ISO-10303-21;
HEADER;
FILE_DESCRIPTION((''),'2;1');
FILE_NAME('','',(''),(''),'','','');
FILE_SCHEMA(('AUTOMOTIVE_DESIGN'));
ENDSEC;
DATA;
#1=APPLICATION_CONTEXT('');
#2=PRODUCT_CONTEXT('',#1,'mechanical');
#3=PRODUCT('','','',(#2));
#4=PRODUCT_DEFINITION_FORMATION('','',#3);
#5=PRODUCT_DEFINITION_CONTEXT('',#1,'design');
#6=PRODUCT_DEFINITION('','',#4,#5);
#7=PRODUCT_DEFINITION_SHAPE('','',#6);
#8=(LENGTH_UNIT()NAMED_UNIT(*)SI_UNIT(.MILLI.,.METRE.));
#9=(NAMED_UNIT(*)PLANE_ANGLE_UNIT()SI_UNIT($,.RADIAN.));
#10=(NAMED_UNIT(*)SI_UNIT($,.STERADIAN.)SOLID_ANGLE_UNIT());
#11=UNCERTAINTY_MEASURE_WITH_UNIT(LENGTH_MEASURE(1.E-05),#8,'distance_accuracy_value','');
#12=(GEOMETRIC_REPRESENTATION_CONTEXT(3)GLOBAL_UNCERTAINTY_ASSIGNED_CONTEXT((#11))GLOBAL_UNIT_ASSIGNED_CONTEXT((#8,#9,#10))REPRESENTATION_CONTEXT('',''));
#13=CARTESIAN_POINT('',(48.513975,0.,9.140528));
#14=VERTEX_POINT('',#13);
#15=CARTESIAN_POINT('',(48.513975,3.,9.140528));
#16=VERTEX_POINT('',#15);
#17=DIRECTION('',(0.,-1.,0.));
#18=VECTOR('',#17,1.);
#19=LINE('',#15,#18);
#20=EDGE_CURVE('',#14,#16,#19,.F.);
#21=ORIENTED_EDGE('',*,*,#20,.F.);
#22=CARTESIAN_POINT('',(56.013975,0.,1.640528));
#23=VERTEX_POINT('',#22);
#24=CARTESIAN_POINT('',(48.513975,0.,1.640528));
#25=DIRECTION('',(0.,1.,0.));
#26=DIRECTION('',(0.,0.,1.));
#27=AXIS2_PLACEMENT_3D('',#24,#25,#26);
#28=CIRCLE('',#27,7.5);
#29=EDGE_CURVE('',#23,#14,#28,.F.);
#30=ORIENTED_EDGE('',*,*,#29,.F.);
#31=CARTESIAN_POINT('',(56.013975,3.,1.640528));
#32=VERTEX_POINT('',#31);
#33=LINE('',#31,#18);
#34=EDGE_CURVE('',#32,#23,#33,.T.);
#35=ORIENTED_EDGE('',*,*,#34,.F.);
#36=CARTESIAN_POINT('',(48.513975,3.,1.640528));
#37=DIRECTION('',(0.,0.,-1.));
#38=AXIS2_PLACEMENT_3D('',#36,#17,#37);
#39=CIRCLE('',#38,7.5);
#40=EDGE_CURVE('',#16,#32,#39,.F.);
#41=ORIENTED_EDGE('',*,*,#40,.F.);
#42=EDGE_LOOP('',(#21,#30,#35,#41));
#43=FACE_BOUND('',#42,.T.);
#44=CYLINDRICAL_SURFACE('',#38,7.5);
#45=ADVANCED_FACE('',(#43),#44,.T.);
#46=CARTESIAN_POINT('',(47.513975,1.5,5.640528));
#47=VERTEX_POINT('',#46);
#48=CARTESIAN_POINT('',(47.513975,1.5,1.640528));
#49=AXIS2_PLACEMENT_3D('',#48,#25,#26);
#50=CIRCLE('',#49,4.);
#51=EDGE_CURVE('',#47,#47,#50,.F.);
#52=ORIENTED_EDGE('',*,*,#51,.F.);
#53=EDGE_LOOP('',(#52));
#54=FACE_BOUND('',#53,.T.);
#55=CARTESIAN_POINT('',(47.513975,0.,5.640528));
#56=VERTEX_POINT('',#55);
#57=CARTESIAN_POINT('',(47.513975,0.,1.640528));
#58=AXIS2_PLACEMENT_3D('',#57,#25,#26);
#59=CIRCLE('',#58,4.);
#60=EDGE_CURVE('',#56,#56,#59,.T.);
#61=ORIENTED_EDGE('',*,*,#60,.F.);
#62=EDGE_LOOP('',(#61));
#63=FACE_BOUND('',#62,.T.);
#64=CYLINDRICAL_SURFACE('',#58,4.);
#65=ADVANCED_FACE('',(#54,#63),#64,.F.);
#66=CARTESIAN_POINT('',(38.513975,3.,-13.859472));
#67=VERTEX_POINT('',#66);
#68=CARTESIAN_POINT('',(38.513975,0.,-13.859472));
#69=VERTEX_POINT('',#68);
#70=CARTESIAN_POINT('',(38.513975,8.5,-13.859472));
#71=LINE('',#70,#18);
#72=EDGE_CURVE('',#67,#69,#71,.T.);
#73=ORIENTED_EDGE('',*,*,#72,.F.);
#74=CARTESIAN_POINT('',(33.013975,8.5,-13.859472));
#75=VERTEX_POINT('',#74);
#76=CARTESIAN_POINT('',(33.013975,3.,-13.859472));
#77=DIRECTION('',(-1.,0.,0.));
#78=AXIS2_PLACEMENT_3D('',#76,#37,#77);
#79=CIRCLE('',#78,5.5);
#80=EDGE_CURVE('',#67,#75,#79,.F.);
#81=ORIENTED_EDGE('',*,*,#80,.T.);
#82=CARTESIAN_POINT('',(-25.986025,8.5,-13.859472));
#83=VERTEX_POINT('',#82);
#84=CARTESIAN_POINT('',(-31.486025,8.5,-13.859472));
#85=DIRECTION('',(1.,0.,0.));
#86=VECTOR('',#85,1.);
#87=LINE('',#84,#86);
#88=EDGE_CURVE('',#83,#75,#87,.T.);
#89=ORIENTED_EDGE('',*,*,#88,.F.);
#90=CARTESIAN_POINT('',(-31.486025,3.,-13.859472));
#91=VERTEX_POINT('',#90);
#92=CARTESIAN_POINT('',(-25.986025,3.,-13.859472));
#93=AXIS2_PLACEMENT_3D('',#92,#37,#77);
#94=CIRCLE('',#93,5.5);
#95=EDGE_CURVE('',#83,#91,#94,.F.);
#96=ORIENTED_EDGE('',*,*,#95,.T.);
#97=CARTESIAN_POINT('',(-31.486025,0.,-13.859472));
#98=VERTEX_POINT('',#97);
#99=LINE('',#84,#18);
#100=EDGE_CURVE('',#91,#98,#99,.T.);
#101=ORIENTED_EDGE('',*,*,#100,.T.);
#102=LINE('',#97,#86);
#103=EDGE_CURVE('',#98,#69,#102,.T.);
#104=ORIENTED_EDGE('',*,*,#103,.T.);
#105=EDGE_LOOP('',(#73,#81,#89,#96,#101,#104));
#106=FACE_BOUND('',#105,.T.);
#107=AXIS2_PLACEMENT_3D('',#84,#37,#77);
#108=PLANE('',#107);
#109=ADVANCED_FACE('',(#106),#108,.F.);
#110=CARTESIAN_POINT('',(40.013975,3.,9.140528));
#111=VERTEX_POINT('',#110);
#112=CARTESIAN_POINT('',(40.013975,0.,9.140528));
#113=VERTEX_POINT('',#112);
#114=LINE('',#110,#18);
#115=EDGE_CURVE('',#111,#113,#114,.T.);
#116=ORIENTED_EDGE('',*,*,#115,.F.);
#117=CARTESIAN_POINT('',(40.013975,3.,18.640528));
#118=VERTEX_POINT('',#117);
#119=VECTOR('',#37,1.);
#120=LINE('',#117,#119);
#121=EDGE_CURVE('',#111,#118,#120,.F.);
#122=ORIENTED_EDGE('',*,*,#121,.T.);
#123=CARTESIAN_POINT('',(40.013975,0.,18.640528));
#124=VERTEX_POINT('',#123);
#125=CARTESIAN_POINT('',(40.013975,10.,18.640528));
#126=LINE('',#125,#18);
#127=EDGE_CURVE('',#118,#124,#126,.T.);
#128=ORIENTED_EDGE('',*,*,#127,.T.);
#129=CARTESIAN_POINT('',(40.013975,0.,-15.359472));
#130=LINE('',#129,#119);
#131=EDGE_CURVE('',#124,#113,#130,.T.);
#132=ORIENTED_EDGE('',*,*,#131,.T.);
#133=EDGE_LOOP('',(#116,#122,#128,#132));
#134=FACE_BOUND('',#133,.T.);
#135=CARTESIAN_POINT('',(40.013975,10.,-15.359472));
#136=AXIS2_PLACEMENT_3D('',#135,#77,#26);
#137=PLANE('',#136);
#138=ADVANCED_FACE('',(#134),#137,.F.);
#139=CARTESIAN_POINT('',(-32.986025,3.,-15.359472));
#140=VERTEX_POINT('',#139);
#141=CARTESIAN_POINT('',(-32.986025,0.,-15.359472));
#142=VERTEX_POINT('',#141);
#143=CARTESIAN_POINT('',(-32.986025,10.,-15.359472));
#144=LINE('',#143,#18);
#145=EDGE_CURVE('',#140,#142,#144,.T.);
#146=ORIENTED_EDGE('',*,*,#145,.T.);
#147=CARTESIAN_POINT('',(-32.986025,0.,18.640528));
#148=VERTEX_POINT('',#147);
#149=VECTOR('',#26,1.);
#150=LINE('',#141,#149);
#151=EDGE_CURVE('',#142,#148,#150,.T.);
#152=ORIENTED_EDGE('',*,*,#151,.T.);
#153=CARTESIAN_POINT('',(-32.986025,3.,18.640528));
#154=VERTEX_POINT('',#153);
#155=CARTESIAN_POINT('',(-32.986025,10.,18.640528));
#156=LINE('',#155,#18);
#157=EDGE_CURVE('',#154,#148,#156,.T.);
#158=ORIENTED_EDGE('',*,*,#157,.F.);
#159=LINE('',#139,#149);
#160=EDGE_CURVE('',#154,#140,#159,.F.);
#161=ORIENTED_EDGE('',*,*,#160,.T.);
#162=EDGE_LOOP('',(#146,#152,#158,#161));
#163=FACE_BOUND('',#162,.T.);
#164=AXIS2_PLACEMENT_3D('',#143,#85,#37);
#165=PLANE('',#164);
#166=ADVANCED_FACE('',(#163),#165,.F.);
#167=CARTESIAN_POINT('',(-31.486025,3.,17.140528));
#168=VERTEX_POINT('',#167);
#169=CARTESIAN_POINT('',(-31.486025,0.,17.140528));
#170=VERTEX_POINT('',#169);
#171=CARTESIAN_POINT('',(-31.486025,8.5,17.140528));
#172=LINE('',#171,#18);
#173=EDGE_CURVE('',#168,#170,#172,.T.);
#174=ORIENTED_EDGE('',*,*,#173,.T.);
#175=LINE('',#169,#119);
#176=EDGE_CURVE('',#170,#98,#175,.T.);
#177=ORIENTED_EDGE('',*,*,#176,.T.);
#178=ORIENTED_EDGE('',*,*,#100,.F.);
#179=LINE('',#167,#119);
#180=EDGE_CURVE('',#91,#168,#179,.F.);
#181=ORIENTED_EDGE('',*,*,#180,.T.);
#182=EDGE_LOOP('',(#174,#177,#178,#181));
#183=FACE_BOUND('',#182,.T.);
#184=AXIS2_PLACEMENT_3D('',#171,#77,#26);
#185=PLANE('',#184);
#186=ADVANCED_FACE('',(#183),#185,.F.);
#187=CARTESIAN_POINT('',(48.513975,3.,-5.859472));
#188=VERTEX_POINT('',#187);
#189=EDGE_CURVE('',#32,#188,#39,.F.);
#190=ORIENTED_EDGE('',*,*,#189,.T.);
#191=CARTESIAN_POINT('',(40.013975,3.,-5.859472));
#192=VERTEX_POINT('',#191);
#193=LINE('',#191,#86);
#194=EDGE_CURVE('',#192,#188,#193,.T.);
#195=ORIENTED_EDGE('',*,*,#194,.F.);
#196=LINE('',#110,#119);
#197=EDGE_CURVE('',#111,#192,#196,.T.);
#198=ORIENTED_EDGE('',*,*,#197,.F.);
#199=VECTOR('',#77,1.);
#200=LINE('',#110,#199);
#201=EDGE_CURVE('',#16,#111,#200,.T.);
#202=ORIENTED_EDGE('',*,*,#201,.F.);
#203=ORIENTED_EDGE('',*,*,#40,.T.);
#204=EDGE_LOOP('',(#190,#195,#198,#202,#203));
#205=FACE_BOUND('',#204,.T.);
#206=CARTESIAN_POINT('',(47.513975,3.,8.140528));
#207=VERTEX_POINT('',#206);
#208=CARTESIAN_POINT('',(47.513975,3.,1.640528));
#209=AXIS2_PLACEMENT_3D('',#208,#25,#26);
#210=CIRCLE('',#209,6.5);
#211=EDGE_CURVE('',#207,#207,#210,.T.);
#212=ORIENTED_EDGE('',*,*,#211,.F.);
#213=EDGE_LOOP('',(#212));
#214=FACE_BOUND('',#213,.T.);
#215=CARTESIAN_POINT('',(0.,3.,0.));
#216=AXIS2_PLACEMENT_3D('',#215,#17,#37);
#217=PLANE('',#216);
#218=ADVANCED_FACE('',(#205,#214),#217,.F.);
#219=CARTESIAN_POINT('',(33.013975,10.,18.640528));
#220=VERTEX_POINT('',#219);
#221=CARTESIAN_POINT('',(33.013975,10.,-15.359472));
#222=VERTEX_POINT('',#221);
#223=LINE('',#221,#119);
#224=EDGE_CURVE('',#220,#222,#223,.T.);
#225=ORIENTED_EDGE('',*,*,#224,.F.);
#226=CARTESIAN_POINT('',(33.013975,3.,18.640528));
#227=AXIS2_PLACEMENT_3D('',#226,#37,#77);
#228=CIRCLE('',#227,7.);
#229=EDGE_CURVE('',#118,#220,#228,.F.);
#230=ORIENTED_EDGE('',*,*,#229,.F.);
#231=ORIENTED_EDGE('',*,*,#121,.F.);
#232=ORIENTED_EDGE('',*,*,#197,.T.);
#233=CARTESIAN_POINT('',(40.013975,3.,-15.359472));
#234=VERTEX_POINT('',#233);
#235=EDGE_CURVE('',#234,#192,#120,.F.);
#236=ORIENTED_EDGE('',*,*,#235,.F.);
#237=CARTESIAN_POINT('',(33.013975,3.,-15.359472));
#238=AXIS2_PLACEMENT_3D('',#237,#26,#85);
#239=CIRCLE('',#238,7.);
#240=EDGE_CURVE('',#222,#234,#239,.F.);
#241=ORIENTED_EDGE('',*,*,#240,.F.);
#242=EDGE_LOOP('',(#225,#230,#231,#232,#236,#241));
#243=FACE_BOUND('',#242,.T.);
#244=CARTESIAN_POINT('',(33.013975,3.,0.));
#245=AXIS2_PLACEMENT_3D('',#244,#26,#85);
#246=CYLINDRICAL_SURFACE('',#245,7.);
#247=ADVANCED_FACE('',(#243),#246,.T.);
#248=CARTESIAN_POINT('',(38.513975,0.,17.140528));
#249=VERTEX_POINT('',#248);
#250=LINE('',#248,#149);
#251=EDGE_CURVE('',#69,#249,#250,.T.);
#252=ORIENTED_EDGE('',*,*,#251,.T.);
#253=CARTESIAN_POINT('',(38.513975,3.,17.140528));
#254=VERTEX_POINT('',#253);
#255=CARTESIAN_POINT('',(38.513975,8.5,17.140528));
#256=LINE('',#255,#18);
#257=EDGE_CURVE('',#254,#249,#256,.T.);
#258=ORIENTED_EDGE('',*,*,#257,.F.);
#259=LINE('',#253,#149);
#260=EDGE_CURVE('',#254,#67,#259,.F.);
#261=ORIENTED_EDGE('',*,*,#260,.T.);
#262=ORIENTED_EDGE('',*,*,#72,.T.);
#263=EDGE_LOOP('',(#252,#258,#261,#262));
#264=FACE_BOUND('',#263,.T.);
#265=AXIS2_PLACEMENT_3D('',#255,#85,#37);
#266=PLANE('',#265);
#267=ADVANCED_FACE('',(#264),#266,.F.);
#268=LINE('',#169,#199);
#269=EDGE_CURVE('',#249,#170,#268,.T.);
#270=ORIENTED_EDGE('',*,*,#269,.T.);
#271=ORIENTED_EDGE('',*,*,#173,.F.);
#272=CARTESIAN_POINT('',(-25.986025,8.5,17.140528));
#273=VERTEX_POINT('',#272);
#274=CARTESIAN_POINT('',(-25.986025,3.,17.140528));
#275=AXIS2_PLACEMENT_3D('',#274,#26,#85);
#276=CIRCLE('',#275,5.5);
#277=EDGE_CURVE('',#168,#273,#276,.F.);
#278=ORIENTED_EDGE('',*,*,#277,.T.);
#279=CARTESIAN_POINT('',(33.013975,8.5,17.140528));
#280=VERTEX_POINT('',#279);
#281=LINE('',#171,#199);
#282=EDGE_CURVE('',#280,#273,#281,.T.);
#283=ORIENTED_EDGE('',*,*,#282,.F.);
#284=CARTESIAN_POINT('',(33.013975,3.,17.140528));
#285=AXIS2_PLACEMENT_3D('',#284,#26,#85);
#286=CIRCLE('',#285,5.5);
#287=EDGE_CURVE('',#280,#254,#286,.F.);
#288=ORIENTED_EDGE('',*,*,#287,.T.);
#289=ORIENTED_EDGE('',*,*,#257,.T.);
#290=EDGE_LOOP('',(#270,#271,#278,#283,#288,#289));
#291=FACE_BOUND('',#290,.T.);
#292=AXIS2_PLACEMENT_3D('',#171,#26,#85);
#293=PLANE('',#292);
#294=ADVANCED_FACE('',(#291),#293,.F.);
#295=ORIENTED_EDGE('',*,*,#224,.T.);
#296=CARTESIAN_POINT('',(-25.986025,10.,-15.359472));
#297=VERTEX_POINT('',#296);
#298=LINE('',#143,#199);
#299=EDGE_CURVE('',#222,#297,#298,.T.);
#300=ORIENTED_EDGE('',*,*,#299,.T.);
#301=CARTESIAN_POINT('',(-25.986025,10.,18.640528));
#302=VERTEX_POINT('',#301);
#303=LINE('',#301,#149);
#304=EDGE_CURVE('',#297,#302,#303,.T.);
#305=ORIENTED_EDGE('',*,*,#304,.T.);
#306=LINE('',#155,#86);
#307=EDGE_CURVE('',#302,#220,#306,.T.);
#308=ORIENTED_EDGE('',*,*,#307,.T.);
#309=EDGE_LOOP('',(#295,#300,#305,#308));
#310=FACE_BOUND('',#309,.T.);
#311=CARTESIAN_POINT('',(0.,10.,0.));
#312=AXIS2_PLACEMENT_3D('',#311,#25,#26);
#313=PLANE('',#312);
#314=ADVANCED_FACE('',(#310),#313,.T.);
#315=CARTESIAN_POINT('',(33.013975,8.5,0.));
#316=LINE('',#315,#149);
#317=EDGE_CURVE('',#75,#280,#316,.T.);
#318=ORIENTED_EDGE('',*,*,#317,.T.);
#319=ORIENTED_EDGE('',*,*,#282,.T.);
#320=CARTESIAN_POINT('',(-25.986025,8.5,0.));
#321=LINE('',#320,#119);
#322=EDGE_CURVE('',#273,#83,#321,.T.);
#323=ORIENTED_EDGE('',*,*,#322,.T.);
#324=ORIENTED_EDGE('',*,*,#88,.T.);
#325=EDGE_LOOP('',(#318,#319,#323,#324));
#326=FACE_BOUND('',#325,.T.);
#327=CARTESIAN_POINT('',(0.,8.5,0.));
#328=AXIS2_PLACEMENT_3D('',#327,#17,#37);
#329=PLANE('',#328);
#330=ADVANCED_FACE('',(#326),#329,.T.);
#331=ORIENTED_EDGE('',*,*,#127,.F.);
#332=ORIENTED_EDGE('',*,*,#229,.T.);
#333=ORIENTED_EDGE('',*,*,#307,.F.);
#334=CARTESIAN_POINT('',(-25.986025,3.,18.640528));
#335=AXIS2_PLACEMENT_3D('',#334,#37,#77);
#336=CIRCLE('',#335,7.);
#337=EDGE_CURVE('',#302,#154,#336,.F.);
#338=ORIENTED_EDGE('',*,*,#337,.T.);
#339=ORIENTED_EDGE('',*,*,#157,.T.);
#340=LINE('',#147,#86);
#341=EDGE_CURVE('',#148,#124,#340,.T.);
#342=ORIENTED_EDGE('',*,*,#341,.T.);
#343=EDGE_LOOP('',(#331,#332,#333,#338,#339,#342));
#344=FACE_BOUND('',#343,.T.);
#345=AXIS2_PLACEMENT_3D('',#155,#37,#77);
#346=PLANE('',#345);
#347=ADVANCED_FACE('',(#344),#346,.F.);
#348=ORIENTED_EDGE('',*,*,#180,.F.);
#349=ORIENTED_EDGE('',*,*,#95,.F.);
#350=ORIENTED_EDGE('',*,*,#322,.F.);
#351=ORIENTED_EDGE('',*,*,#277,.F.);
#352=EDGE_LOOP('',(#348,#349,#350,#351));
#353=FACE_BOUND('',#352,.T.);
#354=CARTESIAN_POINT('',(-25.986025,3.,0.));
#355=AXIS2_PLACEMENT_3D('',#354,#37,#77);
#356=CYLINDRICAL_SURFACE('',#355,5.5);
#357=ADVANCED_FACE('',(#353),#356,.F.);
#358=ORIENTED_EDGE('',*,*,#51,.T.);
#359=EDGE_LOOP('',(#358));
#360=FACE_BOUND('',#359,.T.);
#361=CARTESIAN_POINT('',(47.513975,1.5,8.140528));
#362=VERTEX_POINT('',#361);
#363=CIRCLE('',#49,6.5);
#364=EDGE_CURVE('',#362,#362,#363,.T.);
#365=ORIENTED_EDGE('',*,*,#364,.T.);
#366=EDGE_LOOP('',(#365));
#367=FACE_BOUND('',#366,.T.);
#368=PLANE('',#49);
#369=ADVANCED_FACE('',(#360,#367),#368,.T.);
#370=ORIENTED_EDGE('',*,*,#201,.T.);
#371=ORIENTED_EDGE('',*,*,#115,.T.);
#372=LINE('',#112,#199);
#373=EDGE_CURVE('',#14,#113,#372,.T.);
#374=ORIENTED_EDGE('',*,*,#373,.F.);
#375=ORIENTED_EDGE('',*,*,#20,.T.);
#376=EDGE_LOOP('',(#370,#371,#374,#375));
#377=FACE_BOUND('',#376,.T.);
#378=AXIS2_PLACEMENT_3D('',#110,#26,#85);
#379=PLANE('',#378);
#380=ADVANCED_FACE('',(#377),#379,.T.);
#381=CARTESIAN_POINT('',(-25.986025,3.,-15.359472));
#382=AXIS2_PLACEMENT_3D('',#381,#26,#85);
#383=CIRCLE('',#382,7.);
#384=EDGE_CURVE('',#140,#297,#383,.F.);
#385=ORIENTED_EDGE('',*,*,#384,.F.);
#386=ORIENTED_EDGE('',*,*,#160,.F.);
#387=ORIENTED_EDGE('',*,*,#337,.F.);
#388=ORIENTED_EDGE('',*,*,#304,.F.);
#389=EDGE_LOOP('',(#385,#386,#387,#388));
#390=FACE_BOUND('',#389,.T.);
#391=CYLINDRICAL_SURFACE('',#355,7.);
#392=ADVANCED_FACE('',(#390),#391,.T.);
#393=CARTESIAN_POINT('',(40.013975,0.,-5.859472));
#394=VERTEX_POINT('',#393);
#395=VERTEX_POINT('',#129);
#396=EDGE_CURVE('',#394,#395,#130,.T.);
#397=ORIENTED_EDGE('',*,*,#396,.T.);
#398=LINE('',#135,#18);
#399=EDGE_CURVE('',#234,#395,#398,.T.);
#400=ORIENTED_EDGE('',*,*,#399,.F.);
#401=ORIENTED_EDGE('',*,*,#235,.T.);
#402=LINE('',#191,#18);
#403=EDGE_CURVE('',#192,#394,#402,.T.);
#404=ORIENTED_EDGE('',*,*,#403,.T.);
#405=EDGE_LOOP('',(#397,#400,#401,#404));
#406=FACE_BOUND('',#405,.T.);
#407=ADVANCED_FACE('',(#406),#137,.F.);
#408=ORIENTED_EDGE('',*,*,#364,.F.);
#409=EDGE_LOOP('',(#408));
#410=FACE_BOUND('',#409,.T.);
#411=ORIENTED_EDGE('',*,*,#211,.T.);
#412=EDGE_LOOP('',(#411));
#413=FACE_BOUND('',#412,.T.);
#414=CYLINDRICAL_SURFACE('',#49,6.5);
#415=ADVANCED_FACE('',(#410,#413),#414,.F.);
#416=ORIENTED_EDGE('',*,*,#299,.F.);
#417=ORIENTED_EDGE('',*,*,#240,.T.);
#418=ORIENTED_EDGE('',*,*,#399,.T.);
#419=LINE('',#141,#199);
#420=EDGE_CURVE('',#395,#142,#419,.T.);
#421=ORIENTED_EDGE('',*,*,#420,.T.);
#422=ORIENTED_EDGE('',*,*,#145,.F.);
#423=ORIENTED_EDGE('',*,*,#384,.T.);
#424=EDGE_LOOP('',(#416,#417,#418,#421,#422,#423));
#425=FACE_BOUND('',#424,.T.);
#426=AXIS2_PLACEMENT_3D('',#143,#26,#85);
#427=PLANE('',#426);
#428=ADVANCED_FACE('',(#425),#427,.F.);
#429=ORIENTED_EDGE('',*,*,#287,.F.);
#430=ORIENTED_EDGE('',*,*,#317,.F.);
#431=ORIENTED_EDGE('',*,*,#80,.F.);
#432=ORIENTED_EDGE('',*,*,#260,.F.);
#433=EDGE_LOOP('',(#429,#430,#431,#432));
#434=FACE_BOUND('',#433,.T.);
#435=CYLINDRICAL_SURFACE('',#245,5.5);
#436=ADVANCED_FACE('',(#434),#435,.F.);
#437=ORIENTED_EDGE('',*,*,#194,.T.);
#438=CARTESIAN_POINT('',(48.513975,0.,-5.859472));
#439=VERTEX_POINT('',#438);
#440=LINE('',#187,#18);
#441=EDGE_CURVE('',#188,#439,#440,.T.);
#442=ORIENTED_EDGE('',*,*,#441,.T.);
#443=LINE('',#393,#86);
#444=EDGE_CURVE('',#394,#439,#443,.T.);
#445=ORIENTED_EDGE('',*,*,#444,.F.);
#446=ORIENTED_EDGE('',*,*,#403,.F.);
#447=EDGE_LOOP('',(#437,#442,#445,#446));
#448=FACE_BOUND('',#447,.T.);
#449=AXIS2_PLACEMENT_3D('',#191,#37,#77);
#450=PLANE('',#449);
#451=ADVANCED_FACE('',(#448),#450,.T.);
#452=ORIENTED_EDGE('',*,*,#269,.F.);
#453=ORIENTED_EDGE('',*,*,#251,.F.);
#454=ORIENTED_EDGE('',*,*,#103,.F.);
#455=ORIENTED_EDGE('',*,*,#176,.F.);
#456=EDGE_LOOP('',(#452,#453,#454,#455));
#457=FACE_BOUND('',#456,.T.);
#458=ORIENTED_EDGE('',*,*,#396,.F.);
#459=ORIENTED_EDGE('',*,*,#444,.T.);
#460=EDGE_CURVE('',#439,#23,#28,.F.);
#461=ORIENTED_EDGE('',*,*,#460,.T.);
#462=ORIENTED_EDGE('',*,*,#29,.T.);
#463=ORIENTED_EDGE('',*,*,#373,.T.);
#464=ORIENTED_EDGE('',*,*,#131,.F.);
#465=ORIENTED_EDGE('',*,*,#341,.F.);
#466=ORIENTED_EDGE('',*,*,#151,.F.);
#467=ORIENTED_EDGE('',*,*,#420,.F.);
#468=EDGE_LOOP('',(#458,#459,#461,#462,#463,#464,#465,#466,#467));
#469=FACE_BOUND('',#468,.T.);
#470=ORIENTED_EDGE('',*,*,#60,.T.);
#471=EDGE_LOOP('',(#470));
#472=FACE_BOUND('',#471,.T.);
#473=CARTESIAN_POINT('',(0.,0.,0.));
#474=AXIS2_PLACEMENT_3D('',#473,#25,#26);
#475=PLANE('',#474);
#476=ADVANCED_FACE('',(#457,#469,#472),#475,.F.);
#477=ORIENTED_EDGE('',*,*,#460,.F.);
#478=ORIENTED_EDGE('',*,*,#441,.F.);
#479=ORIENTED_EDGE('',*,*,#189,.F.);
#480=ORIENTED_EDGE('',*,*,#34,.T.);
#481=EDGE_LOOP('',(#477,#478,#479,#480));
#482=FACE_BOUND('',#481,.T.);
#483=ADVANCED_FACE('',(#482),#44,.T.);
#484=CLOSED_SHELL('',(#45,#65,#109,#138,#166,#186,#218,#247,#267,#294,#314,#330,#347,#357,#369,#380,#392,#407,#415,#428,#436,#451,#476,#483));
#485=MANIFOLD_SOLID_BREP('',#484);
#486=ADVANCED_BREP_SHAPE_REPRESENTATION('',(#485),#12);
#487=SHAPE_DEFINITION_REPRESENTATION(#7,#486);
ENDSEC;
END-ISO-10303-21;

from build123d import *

# Parameters (mm, degrees)
SKETCH1_W          = 73
SKETCH1_H          = 34
BASE_DEPTH         = 10
SKETCH3_W          = 70
SKETCH3_H          = 31
INSIDE_CUT_DEPTH   = 8.5
INSIDE_FILLET_R    = 5.5
OUTSIDE_FILLET_R   = 7
SKETCH4_W          = 16
SKETCH4_H          = 15
SCREW_SQUARE_DEPTH = 3
SCREW_FILLET_R     = 7.5
SKETCH5_R          = 4
CUT_EXTRUDE3_DEPTH = 3
SKETCH7_R          = 6.5
CUT_EXTRUDE4_DEPTH = 1.5


with BuildPart() as part:
    # Sketch1 → base (new body)
    with BuildSketch(Plane(origin=(0, 0, 0), x_dir=(1, 0, 0), z_dir=(0, 1, 0))):
        with Locations((3.513975155, -1.64052795)):
            Rectangle(SKETCH1_W, SKETCH1_H)
    extrude(amount=BASE_DEPTH)

    # Sketch3 → inside cut (cut)
    with BuildSketch(Plane.XZ):
        with Locations((3.513975155, 1.64052795)):
            Rectangle(SKETCH3_W, SKETCH3_H)
    extrude(amount=-INSIDE_CUT_DEPTH, mode=Mode.SUBTRACT)

    # inside fillet
    inside_fillet_edges = [part.edges().sort_by_distance(p)[0] for p in [
        (-31.486024845, 8.5, 1.64052795),
        (38.513975155, 8.5, 1.64052795),
    ]]
    fillet(inside_fillet_edges, radius=INSIDE_FILLET_R)

    # outside fillet
    outside_fillet_edges = [part.edges().sort_by_distance(p)[0] for p in [
        (40.013975155, 10, 1.64052795),
        (-32.986024845, 10, 1.64052795),
    ]]
    fillet(outside_fillet_edges, radius=OUTSIDE_FILLET_R)

    # Sketch4 → screw square (add)
    with BuildSketch(Plane.XZ):
        with Locations((48.013975155, 1.64052795)):
            Rectangle(SKETCH4_W, SKETCH4_H)
    extrude(amount=-SCREW_SQUARE_DEPTH)

    # screw fillet
    screw_fillet_edges = [part.edges().sort_by_distance(p)[0] for p in [
        (56.013975155, 1.5, -5.85947205),
        (56.013975155, 1.5, 9.14052795),
    ]]
    fillet(screw_fillet_edges, radius=SCREW_FILLET_R - 0.0001)  # a hair under: the kernel refuses the full size

    # Sketch5 → Cut-Extrude3 (cut)
    with BuildSketch(Plane(origin=(0, 3, 0), x_dir=(1, 0, 0), z_dir=(0, 1, 0))):
        with Locations(Location((47.513975155, -1.64052795, 0), (0, 0, 270))):
            Circle(SKETCH5_R)
    extrude(amount=-CUT_EXTRUDE3_DEPTH, mode=Mode.SUBTRACT)

    # Sketch7 → Cut-Extrude4 (cut)
    with BuildSketch(Plane(origin=(0, 3, 0), x_dir=(1, 0, 0), z_dir=(0, 1, 0))):
        with Locations(Location((47.513975155, -1.64052795, 0), (0, 0, 270))):
            Circle(SKETCH7_R)
    extrude(amount=-CUT_EXTRUDE4_DEPTH, mode=Mode.SUBTRACT)


solid = part.part
